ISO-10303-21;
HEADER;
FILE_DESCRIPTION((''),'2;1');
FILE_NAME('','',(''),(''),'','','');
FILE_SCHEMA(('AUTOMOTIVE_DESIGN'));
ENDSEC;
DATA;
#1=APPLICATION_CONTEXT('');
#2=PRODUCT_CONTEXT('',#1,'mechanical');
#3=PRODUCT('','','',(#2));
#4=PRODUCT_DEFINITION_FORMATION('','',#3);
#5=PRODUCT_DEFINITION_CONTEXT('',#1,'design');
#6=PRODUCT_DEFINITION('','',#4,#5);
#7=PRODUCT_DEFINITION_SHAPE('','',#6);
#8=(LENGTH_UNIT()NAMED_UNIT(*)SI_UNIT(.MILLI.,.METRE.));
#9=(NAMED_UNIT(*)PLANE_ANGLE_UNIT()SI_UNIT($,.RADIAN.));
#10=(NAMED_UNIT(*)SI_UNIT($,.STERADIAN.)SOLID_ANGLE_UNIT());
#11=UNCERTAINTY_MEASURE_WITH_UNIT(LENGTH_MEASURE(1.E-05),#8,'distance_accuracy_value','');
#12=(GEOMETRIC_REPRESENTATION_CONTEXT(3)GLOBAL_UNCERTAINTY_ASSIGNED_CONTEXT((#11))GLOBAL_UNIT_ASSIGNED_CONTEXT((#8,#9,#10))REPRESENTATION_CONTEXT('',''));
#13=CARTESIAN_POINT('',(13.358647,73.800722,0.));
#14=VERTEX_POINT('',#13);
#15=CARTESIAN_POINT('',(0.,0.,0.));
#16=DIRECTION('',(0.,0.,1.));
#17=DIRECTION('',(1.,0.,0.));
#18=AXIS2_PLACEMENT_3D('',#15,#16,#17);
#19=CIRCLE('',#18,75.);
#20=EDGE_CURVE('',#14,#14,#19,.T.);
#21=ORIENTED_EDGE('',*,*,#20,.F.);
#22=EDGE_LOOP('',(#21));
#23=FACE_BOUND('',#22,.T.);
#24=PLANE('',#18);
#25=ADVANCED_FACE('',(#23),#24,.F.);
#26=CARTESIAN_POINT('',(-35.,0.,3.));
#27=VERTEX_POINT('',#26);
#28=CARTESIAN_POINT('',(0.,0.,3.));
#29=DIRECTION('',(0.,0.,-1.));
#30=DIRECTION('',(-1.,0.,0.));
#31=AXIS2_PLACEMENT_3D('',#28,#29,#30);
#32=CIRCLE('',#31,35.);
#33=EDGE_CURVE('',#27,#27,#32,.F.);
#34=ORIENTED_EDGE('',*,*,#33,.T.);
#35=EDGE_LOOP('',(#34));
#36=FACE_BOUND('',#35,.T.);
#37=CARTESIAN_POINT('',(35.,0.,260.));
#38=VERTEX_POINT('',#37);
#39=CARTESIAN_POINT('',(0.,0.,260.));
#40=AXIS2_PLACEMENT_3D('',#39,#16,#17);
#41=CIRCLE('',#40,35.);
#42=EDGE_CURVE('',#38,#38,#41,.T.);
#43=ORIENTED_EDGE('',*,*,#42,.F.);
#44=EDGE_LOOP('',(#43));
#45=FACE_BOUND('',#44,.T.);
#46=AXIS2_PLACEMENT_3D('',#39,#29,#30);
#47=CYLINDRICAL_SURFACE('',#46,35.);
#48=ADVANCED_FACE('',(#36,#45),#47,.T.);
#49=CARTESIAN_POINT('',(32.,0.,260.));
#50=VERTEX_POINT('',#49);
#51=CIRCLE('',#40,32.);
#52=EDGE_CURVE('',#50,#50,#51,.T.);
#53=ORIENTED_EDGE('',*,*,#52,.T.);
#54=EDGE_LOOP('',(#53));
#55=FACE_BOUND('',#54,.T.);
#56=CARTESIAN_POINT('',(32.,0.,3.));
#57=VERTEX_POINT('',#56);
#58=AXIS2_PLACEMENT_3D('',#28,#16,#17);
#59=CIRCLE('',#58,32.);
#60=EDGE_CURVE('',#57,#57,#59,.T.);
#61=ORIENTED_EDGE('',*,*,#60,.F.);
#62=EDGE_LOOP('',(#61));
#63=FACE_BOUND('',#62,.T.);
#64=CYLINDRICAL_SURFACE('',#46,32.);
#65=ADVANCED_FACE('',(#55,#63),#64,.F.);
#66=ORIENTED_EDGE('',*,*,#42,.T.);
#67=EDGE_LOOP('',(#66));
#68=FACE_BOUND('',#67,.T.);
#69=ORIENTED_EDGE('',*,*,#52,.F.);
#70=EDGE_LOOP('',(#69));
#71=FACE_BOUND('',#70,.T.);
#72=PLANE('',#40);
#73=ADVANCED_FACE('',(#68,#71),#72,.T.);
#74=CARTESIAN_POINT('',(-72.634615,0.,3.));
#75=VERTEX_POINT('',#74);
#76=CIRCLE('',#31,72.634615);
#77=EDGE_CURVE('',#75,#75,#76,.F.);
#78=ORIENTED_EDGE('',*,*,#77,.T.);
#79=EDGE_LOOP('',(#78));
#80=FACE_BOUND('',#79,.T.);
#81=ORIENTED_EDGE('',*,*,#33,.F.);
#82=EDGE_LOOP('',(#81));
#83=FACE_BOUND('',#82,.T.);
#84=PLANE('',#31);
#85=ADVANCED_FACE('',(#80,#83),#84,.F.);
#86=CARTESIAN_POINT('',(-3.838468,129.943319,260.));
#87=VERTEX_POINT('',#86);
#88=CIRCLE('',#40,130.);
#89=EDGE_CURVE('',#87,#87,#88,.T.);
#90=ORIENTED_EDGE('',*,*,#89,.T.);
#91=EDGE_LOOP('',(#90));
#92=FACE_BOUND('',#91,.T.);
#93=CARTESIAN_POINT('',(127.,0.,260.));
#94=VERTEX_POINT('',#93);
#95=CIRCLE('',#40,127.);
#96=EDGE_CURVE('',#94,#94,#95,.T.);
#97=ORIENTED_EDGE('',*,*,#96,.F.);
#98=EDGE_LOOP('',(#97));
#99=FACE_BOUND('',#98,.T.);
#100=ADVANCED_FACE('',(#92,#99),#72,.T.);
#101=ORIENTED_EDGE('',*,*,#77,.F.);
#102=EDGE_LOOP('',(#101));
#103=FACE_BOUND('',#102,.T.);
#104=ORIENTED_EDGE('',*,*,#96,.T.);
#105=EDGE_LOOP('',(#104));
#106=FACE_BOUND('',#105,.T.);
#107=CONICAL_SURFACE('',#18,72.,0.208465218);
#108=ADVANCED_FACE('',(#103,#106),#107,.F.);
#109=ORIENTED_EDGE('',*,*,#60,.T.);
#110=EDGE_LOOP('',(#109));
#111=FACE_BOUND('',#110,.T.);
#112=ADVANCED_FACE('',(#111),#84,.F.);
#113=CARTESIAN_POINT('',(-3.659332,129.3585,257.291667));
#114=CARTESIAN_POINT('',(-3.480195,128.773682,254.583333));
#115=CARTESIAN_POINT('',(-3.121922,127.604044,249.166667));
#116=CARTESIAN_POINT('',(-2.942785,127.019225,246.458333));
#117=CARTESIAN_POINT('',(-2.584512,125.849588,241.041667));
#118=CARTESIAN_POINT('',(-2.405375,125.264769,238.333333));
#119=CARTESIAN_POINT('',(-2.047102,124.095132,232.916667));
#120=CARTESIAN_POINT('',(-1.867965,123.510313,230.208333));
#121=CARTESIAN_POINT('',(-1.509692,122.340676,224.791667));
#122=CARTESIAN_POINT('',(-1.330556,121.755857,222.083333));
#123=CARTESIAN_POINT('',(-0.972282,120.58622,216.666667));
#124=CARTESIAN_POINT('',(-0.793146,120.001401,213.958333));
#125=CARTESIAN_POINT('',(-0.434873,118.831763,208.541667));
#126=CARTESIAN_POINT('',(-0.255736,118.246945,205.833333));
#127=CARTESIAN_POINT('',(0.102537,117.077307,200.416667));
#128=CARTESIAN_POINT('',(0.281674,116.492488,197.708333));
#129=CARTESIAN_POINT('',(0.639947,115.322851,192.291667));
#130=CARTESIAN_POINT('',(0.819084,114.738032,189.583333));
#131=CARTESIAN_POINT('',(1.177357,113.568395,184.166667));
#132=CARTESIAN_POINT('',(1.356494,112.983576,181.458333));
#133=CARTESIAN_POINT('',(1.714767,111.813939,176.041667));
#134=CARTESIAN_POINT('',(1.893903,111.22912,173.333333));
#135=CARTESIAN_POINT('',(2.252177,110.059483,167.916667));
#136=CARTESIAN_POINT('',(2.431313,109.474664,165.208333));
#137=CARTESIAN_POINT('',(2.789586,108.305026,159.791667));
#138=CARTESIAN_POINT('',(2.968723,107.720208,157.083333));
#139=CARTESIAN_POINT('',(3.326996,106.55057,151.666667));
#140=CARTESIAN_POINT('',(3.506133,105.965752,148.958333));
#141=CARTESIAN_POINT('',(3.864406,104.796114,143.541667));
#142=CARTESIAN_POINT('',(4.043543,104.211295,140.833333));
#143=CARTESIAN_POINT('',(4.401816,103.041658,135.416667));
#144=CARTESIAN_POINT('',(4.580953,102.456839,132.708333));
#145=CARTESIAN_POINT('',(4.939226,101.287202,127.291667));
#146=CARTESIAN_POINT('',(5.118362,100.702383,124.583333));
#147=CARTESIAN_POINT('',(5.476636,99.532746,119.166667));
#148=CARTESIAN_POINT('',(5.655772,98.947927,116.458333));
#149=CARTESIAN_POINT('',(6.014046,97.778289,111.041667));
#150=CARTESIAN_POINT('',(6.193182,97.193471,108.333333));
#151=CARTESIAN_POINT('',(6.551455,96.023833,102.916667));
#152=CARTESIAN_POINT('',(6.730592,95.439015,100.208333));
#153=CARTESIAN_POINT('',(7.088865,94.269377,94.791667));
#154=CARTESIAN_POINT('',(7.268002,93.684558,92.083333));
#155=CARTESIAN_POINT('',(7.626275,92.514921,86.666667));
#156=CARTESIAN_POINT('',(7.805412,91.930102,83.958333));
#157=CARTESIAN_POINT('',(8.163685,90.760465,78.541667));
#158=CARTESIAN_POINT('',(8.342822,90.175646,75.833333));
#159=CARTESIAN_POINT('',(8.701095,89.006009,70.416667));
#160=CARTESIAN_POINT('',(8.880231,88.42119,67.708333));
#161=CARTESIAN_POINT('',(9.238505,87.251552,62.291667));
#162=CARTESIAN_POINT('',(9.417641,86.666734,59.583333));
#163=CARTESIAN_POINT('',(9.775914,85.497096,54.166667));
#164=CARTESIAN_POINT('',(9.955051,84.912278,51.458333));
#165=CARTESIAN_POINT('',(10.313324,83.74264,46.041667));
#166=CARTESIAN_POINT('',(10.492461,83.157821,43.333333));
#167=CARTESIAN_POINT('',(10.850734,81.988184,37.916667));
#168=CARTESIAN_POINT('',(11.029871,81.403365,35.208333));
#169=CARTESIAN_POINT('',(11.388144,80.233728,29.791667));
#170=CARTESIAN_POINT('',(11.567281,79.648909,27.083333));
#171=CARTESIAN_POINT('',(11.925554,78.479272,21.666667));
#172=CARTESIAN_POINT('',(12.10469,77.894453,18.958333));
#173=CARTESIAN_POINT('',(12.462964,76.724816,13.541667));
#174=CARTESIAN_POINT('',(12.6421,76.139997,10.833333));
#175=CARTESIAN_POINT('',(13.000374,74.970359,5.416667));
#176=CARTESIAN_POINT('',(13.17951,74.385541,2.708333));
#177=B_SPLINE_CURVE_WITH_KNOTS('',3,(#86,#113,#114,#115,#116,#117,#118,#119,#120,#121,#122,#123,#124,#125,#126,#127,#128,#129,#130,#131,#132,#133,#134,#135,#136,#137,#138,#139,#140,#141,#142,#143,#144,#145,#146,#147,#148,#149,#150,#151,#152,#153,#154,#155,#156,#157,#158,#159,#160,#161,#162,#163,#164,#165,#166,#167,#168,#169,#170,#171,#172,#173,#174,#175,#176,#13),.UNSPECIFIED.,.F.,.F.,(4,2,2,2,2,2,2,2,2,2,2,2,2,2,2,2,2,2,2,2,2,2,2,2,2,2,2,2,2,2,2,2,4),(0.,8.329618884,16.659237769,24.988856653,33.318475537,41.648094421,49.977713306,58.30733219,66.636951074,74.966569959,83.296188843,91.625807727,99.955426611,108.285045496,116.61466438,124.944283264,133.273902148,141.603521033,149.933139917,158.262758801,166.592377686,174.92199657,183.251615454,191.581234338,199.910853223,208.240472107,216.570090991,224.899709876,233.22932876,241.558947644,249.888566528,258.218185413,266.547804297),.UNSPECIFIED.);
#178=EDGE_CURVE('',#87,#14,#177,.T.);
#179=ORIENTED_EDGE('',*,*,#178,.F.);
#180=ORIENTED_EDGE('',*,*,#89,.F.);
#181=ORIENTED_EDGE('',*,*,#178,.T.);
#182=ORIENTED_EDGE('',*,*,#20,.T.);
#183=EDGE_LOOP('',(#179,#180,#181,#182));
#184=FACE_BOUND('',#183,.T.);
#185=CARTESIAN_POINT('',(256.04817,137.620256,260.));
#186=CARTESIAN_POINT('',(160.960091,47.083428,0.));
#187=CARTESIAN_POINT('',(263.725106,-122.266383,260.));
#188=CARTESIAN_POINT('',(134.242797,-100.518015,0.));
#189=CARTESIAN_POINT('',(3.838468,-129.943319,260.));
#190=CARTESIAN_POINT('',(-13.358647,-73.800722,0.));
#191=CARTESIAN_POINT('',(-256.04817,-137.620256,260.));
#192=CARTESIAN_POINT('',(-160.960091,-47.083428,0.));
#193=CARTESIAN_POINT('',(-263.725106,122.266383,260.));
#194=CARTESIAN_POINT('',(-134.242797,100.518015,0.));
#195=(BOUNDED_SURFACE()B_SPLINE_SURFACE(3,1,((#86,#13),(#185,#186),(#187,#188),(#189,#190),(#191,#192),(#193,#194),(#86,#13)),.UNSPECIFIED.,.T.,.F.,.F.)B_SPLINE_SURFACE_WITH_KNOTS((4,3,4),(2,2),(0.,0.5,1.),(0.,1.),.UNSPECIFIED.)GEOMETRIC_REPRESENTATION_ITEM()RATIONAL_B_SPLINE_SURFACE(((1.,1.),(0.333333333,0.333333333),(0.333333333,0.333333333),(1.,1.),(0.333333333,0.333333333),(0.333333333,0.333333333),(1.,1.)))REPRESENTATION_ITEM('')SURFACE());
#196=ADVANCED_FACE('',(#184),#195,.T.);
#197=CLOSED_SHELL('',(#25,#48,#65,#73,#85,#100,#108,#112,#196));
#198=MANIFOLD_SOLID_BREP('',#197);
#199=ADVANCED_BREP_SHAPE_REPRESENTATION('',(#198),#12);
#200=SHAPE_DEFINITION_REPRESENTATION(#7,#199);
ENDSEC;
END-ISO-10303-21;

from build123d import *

# Parameters (mm, degrees)
SKETCH3_R           = 72
SKETCH4_R           = 127
SKETCH5_R           = 73.481439627
BOSS_EXTRUDE1_DEPTH = 3
SKETCH6_R           = 35
SKETCH6_R_2         = 32
BOSS_EXTRUDE2_DEPTH = 257


with BuildPart() as part:
    # Loft1: read off the stored shape, not the designer's step
    # Loft1: loft between two sections, ruled curve by curve
    loft1_from = [
        Edge.make_bspline([(-3.838468258, 129.943319033, 260), (256.048169808, 137.62025555, 260), (263.725106325, -122.266382516, 260), (3.838468258, -129.943319033, 260), (-256.048169808, -137.62025555, 260), (-263.725106325, 122.266382516, 260), (-3.838468258, 129.943319033, 260)], [0, 0, 0, 0, 0.5, 0.5, 0.5, 1, 1, 1, 1], 3, [1, 0.333333333, 0.333333333, 1, 0.333333333, 0.333333333, 1]),
    ]
    loft1_to = [
        Edge.make_bspline([(13.35864677, 73.800721924, 0), (160.960090617, 47.083428384, 0), (134.242797078, -100.518015463, 0), (-13.35864677, -73.800721924, 0), (-160.960090617, -47.083428384, 0), (-134.242797078, 100.518015463, 0), (13.35864677, 73.800721924, 0)], [0, 0, 0, 0, 0.5, 0.5, 0.5, 1, 1, 1, 1], 3, [1, 0.333333333, 0.333333333, 1, 0.333333333, 0.333333333, 1]),
    ]
    loft1 = Solid(Shell([*[Face.make_surface_from_curves(loft1_from[k], loft1_to[k]) for k in range(1)], Face(Wire(loft1_from)), Face(Wire(loft1_to))]))
    add(loft1)

    # Sketch3 → Cut-Loft1 section 0
    with BuildSketch(Plane(origin=(0, 0, 0), x_dir=(-1, 0, 0), z_dir=(0, 0, -1))):
        Circle(SKETCH3_R)
    # Sketch4 → Cut-Loft1 section 1
    with BuildSketch(Plane.XY.offset(260)):
        Circle(SKETCH4_R)
    loft(mode=Mode.SUBTRACT)

    # Sketch5 → Boss-Extrude1 (add)
    with BuildSketch(Plane(origin=(0, 0, 0), x_dir=(-1, 0, 0), z_dir=(0, 0, -1))):
        Circle(SKETCH5_R)
    extrude(amount=-BOSS_EXTRUDE1_DEPTH)

    # Sketch6 → Boss-Extrude2 (add)
    with BuildSketch(Plane.XY.offset(3)):
        with Locations(Location((0, 0, 0), (0, 0, 180))):
            Circle(SKETCH6_R)
        Circle(SKETCH6_R_2, mode=Mode.SUBTRACT)
    extrude(amount=BOSS_EXTRUDE2_DEPTH)


solid = part.part
